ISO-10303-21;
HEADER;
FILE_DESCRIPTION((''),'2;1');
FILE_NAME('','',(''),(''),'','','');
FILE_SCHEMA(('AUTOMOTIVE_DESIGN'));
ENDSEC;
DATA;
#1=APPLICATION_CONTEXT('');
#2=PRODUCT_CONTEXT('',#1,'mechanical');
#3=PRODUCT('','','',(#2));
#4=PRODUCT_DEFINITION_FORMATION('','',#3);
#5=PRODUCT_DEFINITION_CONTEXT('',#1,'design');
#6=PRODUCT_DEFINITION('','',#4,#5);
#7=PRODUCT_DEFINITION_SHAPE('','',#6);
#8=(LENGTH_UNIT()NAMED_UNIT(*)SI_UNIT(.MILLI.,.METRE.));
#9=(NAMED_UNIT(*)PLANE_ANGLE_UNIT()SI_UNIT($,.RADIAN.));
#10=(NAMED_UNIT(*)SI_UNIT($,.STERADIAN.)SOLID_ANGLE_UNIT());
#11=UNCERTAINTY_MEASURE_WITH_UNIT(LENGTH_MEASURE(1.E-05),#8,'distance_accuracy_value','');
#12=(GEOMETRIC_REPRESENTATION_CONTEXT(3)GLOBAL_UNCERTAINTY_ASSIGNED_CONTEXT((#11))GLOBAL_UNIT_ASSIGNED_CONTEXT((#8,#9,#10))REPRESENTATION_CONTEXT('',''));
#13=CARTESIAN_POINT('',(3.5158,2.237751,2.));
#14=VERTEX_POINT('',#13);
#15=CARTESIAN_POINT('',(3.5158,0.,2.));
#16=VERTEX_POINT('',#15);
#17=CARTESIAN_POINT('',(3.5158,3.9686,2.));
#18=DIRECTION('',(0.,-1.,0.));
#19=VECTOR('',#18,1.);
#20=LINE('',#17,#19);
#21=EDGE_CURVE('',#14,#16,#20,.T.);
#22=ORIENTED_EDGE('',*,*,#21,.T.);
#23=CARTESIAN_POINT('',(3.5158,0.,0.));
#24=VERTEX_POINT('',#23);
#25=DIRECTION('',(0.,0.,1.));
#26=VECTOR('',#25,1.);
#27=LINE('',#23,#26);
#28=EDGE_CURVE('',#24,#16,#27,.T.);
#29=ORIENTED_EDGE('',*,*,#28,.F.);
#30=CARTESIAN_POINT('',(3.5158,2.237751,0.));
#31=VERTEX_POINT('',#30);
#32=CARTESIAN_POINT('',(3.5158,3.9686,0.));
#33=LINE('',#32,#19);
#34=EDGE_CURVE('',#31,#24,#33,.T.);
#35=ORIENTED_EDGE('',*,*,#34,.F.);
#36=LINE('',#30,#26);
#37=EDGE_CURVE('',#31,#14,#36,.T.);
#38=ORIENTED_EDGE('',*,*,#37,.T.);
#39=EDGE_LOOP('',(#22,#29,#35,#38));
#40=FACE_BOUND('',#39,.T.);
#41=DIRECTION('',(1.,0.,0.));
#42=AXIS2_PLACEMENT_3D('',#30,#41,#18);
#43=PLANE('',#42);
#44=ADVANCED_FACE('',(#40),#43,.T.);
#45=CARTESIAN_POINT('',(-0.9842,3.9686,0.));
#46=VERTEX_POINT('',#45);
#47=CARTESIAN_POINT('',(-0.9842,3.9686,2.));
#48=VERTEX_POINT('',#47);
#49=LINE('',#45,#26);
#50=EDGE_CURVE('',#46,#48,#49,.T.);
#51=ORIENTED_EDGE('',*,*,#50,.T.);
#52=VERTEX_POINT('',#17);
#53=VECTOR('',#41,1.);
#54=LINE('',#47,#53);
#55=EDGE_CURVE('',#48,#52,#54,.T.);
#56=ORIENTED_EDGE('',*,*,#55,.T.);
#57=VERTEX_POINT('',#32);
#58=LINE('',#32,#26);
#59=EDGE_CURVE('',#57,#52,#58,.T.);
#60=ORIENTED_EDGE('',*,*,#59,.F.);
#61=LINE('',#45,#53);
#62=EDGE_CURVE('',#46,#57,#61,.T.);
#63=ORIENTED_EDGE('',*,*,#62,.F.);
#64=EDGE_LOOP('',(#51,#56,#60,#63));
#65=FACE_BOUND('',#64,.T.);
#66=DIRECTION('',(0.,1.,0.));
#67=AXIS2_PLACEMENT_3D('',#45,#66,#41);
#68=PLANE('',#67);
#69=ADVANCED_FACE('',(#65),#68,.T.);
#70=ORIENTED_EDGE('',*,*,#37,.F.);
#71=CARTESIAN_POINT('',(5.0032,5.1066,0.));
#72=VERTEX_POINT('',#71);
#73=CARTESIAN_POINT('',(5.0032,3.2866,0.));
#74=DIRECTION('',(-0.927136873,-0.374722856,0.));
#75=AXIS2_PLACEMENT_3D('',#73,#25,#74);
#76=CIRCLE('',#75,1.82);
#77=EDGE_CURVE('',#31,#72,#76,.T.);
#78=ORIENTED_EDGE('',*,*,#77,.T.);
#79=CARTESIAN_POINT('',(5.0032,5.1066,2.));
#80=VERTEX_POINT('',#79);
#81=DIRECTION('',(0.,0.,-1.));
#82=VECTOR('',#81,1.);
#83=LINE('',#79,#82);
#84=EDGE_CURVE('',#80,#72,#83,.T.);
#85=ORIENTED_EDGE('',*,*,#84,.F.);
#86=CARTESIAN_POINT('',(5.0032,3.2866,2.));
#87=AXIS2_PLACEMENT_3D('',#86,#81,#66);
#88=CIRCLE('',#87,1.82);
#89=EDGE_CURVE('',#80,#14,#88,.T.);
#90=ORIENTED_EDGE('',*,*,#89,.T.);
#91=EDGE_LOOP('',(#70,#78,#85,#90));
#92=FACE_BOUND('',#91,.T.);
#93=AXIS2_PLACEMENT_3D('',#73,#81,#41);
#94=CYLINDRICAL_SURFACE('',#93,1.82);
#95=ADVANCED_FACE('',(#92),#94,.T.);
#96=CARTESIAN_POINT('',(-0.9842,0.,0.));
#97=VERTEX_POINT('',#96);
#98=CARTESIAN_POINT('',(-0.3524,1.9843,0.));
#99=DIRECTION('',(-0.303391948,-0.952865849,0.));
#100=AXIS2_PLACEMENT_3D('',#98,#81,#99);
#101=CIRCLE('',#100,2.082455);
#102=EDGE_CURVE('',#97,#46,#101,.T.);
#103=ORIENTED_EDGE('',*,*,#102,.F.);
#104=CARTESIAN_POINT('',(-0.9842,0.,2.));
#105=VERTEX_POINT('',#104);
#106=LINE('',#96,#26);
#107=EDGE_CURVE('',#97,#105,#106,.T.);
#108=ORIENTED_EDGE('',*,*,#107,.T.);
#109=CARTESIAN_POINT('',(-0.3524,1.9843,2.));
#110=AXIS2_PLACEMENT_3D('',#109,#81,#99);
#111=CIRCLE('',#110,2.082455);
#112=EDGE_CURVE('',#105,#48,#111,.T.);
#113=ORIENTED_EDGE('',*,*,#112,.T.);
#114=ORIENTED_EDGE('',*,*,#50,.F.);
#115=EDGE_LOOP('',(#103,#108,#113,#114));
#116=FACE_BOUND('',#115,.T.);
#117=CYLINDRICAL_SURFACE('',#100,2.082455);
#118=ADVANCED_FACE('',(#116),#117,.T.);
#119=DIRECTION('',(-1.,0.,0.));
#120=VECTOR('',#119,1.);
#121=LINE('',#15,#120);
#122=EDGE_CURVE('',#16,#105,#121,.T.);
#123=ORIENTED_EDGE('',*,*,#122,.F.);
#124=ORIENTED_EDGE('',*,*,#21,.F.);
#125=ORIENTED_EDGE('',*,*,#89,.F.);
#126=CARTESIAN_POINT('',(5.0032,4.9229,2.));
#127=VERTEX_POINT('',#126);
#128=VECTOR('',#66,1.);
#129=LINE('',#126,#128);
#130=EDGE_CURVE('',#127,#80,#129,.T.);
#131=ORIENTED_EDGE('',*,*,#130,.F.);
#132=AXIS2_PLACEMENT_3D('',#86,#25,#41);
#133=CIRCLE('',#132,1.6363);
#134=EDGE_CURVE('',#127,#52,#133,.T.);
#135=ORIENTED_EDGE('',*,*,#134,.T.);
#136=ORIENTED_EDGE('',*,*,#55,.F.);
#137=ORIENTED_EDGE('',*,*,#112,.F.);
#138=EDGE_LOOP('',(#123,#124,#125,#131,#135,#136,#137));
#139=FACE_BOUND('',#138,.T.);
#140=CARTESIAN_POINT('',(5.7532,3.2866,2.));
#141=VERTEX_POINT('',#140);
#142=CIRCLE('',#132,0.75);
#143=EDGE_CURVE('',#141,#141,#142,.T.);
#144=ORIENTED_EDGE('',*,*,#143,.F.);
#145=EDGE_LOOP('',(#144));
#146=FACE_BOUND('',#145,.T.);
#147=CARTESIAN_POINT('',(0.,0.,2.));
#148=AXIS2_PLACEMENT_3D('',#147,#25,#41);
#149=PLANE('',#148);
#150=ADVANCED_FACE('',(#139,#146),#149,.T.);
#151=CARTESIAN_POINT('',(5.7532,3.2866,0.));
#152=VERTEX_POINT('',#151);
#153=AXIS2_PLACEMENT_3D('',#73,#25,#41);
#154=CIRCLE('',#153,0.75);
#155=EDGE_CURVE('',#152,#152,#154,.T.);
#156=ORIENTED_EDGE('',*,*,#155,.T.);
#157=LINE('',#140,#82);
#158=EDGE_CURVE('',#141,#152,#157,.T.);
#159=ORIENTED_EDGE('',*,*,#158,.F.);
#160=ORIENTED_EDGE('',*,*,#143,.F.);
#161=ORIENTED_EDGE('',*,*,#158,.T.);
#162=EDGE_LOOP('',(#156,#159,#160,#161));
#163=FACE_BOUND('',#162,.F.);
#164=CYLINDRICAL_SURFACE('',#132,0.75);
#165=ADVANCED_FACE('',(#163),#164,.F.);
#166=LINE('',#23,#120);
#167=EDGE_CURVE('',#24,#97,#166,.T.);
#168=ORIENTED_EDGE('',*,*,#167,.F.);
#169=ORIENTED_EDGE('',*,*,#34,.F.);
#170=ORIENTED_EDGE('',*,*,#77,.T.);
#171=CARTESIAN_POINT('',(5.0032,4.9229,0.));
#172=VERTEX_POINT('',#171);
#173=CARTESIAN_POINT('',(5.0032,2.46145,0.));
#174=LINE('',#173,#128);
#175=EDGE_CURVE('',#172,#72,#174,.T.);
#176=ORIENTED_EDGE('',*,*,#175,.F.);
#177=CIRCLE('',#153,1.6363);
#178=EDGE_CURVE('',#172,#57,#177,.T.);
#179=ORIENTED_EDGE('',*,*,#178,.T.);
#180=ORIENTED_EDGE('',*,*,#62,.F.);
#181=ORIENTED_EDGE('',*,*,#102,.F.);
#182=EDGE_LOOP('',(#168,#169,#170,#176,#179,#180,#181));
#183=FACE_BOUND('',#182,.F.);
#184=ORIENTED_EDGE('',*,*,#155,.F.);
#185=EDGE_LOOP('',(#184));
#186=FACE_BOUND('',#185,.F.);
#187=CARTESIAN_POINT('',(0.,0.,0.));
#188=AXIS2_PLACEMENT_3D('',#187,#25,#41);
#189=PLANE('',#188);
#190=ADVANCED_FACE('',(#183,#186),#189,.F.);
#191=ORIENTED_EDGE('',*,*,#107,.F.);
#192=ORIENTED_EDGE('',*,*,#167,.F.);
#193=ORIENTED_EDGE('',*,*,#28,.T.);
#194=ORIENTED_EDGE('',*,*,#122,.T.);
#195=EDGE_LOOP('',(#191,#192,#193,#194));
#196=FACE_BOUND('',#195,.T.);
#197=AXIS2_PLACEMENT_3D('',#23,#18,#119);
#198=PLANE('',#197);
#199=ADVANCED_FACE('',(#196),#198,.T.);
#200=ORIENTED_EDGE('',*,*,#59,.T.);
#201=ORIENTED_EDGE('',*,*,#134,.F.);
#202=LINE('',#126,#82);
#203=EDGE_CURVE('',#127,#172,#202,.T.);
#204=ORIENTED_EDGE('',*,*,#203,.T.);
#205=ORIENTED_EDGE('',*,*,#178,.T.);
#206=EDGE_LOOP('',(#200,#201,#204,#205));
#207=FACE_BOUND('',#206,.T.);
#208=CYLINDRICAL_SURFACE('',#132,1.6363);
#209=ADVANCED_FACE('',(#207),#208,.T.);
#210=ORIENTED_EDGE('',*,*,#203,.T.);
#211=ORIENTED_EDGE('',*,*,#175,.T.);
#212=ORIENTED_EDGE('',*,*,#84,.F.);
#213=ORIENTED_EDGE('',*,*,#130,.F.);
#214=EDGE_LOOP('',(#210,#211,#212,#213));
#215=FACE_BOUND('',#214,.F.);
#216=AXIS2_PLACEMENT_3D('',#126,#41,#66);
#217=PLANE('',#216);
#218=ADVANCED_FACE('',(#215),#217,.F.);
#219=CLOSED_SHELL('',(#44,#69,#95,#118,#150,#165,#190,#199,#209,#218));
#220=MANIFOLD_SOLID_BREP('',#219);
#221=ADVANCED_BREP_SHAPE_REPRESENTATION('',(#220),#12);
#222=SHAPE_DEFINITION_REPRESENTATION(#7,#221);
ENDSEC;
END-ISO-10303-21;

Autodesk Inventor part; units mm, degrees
ref_plane "YZ Plane" through (0, 0, 0) normal (1, 0, 0) x (0, 1, 0)
ref_plane "XZ Plane" through (0, 0, 0) normal (0, 1, 0) x (-1, 0, 0)
ref_plane "XY Plane" through (0, 0, 0) normal (0, 0, 1) x (1, 0, 0)
sketch "Sketch1" plane through (0, 0, 0) normal (0, 0, 1) x (1, 0, 0)
  circle A0 centre (5.0032, 3.2866) radius 1.82
  point P0 (0, 0)
  dimension "d0" = 3.64
extrude "Extrusion1" add sketch "Sketch1" along normal blind 2
sketch "Sketch2" plane through (5.0032, 3.2866, 2) normal (0, 0, 1) x (1, 0, 0)
  circle A0 centre (0, 0) radius 0.75
  point P0 (-5.0032, -3.2866)
  dimension "d3" = 1.5
extrude "Extrusion2" cut sketch "Sketch2" against normal through all
sketch "Sketch3" plane through (5.0032, 3.2866, 2) normal (0, 0, 1) x (1, 0, 0)
  line L0 (0, -1.82) -> (0, -0.682) construction
  line L1 (-1.6874, -0.682) -> (-1.4874, -0.682)
  circle A0 centre (0, 0) radius 1.82 projected
  circle A1 centre (0, 0) radius 1.6363
  line L2 (0, 1.6363) -> (0, 1.82)
  point P0 (-5.0032, -3.2866)
  point P1 (0.02, 0)
  dimension "d6" = 1.138
  dimension "d7" = 0.2
extrude "Extrusion3" cut sketch "Sketch3" against normal through all contours A0 L2 A1 L1 picked at (-0.267, 1.7273)
sketch "Sketch5" plane through (0, 0, 0) normal (0, 0, -1) x (-1, 0, 0)
  line L0 (-3.3158, 2.6046) -> (-3.5158, 2.6046) projected
  arc A0 (-3.5158, 2.6046) -> (-5.0032, 4.9229) centre (-5.0032, 3.2866) ccw projected
  line L1 (-5.0032, 4.9229) -> (-5.0032, 5.1066) projected
  arc A1 (-5.0032, 5.1066) -> (-3.3158, 2.6046) centre (-5.0032, 3.2866) ccw projected
  circle A2 centre (-5.0032, 3.2866) radius 0.75 projected
  line L2 (-3.5158, 2.6046) -> (-3.5158, 2.2377) construction
  arc A3 (-5.0032, 5.1066) -> (-3.3158, 2.6046) centre (-5.0032, 3.2866) ccw projected
  line L3 (-3.5158, 3.9686) -> (-3.5158, 0)
  line L4 (-3.5158, 0) -> (0.9842, 0)
  line L5 (0.9842, 0) -> (0.9842, 3.9686)
  line L6 (0.9842, 3.9686) -> (-3.5158, 3.9686)
  arc A4 (0.9842, 0) -> (0.9842, 3.9686) centre (0.3524, 1.9843) ccw
  point P0 (0, 0)
  dimension "d18" = 4.5
extrude "Extrusion6" add sketch "Sketch5" against normal up to surface (2 mm away) contours L0 A0 L6 L5 L4 L3 A1 | A4 L5
properties material "Liga de Nickel-Copper 400"
